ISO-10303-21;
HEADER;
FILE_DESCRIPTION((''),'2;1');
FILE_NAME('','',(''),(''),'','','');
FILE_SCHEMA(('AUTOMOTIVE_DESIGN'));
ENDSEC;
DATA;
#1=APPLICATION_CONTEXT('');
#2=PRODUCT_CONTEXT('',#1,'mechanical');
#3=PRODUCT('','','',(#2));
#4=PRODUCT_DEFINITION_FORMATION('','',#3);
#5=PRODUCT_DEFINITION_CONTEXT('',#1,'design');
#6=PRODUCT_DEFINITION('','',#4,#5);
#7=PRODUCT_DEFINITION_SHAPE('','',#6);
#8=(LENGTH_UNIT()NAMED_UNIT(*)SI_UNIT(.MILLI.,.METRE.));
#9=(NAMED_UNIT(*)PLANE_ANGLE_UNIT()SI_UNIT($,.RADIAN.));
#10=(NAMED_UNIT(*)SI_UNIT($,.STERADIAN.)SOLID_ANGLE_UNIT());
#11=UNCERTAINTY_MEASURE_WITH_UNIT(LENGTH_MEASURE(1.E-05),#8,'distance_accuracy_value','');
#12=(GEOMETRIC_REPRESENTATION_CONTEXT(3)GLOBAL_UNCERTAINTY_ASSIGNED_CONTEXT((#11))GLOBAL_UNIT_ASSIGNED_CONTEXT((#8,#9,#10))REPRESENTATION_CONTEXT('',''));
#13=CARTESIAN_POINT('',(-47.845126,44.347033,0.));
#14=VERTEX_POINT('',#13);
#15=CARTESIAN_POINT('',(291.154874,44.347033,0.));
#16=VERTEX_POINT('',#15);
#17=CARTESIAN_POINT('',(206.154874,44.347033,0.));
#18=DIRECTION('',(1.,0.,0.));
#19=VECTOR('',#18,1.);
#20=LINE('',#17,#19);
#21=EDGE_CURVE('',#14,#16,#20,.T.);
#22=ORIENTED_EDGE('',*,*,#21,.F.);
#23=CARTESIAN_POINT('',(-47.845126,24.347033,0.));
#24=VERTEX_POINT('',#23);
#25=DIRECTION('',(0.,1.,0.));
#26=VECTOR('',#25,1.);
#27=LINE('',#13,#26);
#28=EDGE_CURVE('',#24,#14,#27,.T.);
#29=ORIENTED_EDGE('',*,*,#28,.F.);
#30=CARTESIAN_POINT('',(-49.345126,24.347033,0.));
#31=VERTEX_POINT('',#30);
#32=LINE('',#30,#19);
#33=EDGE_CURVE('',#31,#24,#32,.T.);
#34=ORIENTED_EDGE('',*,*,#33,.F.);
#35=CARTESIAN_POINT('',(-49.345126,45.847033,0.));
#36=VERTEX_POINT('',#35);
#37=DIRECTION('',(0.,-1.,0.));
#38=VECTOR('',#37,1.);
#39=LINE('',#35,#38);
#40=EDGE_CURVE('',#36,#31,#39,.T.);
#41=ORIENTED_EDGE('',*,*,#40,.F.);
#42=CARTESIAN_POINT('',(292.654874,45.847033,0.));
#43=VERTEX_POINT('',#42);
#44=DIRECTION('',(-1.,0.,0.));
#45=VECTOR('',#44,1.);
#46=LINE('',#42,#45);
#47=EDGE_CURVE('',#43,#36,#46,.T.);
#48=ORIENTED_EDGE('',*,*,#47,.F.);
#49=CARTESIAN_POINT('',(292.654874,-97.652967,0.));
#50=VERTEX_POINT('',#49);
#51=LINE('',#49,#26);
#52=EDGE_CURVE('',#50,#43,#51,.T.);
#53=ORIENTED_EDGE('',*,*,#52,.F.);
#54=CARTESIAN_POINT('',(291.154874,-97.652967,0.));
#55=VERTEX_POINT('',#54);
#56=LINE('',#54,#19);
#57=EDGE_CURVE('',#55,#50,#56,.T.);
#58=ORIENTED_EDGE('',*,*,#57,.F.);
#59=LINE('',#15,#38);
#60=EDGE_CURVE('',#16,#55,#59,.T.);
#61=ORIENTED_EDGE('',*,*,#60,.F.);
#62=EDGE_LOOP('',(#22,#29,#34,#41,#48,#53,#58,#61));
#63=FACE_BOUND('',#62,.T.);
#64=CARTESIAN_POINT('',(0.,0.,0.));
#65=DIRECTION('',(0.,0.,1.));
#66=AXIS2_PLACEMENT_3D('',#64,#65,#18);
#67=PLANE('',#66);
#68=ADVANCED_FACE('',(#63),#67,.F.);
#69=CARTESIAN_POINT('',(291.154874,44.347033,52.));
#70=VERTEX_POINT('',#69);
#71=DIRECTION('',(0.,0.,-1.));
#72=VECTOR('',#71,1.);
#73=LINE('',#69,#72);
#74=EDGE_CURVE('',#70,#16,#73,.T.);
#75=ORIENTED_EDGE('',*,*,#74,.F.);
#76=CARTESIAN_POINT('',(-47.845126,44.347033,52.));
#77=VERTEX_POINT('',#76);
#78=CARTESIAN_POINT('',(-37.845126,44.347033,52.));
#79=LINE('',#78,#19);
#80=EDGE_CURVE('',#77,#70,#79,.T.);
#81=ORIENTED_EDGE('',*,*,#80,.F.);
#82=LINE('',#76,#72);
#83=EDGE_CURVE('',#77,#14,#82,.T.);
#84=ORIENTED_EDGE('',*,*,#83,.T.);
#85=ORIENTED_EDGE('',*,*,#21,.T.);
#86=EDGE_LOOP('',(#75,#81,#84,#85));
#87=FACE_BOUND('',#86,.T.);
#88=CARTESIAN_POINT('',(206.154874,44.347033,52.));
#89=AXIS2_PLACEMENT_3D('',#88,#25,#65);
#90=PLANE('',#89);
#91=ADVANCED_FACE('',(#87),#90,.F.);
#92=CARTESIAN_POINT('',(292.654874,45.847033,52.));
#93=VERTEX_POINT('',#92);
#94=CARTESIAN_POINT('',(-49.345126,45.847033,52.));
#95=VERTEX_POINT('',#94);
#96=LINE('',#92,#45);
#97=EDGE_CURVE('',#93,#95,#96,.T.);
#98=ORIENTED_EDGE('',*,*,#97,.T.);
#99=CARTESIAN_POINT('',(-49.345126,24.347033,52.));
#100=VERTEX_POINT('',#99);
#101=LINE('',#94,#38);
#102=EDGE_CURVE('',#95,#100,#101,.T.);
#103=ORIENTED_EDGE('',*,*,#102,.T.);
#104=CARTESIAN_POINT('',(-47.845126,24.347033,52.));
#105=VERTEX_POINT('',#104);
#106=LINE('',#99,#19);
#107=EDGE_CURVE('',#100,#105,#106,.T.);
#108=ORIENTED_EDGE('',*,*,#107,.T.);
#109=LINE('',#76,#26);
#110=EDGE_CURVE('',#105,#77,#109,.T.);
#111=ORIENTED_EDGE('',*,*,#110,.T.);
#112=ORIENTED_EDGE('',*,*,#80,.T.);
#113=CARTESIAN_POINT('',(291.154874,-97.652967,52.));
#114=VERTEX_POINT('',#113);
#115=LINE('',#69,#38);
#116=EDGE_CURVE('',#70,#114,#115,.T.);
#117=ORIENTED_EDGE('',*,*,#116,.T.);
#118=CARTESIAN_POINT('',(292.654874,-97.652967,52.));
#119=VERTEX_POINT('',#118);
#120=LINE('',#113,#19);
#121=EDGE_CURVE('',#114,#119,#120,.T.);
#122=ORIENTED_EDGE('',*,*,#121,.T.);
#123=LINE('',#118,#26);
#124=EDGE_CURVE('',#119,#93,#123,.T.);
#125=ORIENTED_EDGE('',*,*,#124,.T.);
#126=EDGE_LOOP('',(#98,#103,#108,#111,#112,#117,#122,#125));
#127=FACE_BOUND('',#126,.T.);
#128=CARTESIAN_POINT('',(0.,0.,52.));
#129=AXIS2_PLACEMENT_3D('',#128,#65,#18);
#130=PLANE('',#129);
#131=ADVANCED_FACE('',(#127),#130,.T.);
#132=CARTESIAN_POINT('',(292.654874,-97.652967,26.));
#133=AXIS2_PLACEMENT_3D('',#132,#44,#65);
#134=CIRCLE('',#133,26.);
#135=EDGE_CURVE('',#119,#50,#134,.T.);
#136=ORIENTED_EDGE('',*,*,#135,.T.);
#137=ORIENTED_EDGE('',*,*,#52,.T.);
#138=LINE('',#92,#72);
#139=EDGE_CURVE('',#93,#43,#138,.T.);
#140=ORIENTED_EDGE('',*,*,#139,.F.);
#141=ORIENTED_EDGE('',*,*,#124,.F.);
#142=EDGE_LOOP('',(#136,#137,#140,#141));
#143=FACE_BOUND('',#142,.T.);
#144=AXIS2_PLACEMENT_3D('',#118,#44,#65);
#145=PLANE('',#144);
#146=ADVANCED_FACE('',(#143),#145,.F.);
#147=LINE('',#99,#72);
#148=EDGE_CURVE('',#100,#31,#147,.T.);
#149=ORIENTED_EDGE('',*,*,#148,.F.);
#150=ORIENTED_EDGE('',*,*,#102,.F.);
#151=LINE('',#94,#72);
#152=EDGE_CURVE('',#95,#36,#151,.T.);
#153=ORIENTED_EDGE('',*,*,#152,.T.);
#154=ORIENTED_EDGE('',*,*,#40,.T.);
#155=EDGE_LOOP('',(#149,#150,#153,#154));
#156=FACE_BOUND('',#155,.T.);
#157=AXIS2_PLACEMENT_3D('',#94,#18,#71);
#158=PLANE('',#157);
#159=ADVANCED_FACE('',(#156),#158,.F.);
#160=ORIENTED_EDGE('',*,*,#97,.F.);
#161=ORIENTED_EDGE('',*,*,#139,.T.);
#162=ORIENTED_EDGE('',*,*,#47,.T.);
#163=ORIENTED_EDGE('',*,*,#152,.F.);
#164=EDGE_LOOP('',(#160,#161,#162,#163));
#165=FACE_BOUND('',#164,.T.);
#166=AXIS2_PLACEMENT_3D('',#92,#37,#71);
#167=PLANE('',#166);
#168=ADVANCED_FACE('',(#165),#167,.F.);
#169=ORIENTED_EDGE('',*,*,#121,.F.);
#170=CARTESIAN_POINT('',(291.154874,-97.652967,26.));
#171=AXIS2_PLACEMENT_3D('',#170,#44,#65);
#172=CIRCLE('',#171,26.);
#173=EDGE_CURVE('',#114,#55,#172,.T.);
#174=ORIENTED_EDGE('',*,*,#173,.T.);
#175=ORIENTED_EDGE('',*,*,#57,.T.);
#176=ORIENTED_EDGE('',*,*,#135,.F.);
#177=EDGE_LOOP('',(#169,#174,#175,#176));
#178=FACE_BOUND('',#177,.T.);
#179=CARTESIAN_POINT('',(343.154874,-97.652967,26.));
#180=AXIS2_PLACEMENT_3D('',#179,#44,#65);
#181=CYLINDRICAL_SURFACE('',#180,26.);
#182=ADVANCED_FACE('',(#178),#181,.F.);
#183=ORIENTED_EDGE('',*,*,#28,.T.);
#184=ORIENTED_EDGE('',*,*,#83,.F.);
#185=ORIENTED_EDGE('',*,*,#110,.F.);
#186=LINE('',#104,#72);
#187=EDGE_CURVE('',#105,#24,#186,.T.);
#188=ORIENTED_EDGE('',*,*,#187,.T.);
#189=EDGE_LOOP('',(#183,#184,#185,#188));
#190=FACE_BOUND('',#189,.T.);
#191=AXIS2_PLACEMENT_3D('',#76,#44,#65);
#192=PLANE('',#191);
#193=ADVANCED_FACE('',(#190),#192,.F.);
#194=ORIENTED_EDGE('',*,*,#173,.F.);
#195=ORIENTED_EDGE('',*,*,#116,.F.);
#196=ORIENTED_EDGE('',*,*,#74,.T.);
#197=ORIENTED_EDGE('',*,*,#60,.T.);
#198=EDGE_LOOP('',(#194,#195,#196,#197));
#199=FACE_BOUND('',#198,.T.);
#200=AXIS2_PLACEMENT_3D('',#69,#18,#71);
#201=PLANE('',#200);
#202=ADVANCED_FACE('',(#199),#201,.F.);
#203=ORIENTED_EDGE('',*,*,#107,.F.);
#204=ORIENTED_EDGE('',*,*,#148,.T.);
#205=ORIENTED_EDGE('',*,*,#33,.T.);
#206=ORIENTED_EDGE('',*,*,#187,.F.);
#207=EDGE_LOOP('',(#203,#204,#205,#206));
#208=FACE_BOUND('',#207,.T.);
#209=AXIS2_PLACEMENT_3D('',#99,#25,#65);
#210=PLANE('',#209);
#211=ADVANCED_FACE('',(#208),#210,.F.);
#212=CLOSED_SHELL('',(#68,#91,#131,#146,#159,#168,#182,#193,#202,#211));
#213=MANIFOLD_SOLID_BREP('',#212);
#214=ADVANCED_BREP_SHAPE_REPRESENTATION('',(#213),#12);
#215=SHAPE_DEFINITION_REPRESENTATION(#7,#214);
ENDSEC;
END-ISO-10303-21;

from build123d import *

# Parameters (mm, degrees)
EXTRUDE_1_DEPTH     = 52
SKETCH_2_R          = 26
CUT_EXTRUDE_1_DEPTH = 52


with BuildPart() as part:
    # 草图1 → 凸台-拉伸1 (new body)
    with BuildSketch(Plane.XY):
        Polygon((-37.84512636, 44.347033455), (206.15487364, 44.347033455), (291.15487364, 44.347033455), (291.15487364, -97.652966545), (292.65487364, -97.652966545), (292.65487364, 45.847033455), (-49.34512636, 45.847033455), (-49.34512636, 24.347033455), (-47.84512636, 24.347033455), (-47.84512636, 44.347033455), align=None)
    extrude(amount=EXTRUDE_1_DEPTH)

    # 草图2 → 切除-拉伸1 (cut)
    with BuildSketch(Plane.ZY.offset(-291.15487364)):
        with Locations((26, -97.652966545)):
            Circle(SKETCH_2_R)
    extrude(amount=-CUT_EXTRUDE_1_DEPTH, mode=Mode.SUBTRACT)


solid = part.part
